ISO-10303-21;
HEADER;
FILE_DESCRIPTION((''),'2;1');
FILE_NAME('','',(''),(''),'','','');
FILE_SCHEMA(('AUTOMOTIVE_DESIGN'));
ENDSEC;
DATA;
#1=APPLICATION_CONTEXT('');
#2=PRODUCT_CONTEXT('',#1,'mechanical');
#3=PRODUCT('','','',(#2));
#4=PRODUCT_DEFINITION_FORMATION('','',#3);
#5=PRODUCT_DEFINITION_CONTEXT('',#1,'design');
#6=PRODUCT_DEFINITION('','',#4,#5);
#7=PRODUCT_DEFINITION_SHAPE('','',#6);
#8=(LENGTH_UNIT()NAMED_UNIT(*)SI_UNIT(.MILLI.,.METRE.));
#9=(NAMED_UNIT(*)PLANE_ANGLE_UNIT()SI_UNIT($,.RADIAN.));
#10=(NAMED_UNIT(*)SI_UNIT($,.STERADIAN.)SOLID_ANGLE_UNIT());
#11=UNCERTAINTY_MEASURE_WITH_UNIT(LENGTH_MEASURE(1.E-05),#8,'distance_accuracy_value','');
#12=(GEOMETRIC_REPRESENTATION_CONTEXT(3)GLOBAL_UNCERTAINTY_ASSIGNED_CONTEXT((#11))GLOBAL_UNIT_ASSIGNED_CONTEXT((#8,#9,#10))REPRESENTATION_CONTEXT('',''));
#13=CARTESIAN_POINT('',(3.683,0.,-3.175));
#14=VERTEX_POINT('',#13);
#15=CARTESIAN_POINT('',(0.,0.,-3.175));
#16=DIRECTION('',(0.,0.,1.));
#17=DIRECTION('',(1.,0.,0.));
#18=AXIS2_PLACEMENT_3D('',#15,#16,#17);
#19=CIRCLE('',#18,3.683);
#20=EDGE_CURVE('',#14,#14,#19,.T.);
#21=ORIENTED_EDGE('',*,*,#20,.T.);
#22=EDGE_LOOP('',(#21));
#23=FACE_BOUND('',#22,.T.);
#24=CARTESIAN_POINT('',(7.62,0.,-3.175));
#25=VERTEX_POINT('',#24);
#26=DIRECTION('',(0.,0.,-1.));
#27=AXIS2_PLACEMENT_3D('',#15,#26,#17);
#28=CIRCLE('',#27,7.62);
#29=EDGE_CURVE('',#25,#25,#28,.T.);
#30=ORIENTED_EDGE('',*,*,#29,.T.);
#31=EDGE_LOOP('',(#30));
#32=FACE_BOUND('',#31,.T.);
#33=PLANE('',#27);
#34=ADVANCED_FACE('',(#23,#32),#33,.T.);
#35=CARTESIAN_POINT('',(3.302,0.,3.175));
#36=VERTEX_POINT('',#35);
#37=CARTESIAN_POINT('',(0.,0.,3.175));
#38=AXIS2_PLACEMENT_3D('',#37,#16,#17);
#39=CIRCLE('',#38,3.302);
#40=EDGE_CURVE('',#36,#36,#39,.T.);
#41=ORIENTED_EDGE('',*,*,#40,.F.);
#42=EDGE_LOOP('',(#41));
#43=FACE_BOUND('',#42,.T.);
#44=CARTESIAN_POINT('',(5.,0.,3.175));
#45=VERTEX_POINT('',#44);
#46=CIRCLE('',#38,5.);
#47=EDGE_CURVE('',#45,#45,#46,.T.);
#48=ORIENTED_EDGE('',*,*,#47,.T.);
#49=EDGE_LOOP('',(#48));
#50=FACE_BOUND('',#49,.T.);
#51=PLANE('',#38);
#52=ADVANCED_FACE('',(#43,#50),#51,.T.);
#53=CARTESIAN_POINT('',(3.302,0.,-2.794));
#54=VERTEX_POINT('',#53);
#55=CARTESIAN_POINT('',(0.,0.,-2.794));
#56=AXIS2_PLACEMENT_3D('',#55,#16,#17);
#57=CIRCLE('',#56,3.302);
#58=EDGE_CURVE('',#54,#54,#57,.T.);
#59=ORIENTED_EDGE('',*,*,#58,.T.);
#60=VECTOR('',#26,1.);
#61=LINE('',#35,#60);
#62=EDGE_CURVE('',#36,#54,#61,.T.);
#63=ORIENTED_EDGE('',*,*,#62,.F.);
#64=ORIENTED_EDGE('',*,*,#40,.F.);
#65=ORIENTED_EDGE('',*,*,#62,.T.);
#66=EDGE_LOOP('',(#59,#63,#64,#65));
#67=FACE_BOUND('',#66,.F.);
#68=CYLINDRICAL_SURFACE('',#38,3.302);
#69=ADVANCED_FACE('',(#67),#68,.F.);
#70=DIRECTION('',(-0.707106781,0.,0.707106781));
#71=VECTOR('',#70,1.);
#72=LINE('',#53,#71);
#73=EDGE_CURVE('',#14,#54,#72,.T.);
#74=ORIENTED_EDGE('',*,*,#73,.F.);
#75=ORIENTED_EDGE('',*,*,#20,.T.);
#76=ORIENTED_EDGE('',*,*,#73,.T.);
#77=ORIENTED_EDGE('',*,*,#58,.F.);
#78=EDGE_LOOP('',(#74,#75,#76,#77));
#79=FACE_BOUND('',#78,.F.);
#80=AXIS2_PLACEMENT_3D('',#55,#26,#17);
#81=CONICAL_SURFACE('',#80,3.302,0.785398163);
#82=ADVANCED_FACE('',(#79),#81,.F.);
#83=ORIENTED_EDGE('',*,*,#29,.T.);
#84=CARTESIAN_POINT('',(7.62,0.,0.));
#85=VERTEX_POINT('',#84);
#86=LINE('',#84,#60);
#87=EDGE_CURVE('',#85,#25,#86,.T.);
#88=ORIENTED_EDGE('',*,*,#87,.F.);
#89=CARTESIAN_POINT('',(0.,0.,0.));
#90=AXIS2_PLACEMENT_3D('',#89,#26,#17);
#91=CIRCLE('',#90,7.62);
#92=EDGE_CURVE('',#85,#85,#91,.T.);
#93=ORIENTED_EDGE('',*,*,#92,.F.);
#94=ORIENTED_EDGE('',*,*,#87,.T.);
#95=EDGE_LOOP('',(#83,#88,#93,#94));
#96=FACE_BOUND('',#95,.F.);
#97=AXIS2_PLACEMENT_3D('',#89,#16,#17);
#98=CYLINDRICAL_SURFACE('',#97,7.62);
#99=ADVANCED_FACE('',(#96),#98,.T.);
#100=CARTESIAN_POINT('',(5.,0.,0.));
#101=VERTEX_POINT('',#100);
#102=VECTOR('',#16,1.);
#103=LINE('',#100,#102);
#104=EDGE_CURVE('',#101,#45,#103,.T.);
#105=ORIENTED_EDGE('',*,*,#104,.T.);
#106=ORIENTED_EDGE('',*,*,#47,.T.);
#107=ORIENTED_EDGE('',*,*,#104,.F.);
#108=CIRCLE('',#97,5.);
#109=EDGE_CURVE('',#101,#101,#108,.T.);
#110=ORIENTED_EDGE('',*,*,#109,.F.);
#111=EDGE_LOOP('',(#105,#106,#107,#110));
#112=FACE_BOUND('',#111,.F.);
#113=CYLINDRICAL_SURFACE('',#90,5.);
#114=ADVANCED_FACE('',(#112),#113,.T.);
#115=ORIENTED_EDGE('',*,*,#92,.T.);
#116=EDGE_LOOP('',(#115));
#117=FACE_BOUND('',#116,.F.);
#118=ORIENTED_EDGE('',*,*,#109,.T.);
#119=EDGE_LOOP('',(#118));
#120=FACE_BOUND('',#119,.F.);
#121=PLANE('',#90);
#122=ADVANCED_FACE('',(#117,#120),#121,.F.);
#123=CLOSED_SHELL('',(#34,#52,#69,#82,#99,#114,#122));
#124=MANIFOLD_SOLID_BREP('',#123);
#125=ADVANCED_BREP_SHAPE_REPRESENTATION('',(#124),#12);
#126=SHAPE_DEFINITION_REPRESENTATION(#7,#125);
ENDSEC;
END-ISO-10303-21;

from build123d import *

# Parameters (mm, degrees)
F0_R     = 5
F1_DEPTH = 3.175
F2_R     = 7.62
F2_R_2   = 5
F3_DEPTH = 3.175
F4_R     = 3.302
F5_DEPTH = 6.351
F6_SIZE  = 0.381


with BuildPart() as f1:
    # F0 (on Top) → F1 (new body)
    with BuildSketch(Plane.XY):
        Circle(F0_R)
    extrude(amount=F1_DEPTH)

    # F2 (on face) → F3 (join)
    with BuildSketch(Plane(origin=(0, 0, 0), x_dir=(1, 0, 0), z_dir=(0, 0, -1))):
        Circle(F2_R)
        Circle(F2_R_2, mode=Mode.SUBTRACT)
        Circle(F2_R_2)
    extrude(amount=F3_DEPTH)

    # F4 (on face) → F5 (cut, through all)
    with BuildSketch(Plane.XY.offset(3.175)):
        Circle(F4_R)
    extrude(amount=-F5_DEPTH, mode=Mode.SUBTRACT)

    # F6
    f6_edges = [f1.edges().sort_by_distance(p)[0] for p in [
        (-3.302, 0, -3.175),
    ]]
    chamfer(f6_edges, length=F6_SIZE)


solid = f1.part
